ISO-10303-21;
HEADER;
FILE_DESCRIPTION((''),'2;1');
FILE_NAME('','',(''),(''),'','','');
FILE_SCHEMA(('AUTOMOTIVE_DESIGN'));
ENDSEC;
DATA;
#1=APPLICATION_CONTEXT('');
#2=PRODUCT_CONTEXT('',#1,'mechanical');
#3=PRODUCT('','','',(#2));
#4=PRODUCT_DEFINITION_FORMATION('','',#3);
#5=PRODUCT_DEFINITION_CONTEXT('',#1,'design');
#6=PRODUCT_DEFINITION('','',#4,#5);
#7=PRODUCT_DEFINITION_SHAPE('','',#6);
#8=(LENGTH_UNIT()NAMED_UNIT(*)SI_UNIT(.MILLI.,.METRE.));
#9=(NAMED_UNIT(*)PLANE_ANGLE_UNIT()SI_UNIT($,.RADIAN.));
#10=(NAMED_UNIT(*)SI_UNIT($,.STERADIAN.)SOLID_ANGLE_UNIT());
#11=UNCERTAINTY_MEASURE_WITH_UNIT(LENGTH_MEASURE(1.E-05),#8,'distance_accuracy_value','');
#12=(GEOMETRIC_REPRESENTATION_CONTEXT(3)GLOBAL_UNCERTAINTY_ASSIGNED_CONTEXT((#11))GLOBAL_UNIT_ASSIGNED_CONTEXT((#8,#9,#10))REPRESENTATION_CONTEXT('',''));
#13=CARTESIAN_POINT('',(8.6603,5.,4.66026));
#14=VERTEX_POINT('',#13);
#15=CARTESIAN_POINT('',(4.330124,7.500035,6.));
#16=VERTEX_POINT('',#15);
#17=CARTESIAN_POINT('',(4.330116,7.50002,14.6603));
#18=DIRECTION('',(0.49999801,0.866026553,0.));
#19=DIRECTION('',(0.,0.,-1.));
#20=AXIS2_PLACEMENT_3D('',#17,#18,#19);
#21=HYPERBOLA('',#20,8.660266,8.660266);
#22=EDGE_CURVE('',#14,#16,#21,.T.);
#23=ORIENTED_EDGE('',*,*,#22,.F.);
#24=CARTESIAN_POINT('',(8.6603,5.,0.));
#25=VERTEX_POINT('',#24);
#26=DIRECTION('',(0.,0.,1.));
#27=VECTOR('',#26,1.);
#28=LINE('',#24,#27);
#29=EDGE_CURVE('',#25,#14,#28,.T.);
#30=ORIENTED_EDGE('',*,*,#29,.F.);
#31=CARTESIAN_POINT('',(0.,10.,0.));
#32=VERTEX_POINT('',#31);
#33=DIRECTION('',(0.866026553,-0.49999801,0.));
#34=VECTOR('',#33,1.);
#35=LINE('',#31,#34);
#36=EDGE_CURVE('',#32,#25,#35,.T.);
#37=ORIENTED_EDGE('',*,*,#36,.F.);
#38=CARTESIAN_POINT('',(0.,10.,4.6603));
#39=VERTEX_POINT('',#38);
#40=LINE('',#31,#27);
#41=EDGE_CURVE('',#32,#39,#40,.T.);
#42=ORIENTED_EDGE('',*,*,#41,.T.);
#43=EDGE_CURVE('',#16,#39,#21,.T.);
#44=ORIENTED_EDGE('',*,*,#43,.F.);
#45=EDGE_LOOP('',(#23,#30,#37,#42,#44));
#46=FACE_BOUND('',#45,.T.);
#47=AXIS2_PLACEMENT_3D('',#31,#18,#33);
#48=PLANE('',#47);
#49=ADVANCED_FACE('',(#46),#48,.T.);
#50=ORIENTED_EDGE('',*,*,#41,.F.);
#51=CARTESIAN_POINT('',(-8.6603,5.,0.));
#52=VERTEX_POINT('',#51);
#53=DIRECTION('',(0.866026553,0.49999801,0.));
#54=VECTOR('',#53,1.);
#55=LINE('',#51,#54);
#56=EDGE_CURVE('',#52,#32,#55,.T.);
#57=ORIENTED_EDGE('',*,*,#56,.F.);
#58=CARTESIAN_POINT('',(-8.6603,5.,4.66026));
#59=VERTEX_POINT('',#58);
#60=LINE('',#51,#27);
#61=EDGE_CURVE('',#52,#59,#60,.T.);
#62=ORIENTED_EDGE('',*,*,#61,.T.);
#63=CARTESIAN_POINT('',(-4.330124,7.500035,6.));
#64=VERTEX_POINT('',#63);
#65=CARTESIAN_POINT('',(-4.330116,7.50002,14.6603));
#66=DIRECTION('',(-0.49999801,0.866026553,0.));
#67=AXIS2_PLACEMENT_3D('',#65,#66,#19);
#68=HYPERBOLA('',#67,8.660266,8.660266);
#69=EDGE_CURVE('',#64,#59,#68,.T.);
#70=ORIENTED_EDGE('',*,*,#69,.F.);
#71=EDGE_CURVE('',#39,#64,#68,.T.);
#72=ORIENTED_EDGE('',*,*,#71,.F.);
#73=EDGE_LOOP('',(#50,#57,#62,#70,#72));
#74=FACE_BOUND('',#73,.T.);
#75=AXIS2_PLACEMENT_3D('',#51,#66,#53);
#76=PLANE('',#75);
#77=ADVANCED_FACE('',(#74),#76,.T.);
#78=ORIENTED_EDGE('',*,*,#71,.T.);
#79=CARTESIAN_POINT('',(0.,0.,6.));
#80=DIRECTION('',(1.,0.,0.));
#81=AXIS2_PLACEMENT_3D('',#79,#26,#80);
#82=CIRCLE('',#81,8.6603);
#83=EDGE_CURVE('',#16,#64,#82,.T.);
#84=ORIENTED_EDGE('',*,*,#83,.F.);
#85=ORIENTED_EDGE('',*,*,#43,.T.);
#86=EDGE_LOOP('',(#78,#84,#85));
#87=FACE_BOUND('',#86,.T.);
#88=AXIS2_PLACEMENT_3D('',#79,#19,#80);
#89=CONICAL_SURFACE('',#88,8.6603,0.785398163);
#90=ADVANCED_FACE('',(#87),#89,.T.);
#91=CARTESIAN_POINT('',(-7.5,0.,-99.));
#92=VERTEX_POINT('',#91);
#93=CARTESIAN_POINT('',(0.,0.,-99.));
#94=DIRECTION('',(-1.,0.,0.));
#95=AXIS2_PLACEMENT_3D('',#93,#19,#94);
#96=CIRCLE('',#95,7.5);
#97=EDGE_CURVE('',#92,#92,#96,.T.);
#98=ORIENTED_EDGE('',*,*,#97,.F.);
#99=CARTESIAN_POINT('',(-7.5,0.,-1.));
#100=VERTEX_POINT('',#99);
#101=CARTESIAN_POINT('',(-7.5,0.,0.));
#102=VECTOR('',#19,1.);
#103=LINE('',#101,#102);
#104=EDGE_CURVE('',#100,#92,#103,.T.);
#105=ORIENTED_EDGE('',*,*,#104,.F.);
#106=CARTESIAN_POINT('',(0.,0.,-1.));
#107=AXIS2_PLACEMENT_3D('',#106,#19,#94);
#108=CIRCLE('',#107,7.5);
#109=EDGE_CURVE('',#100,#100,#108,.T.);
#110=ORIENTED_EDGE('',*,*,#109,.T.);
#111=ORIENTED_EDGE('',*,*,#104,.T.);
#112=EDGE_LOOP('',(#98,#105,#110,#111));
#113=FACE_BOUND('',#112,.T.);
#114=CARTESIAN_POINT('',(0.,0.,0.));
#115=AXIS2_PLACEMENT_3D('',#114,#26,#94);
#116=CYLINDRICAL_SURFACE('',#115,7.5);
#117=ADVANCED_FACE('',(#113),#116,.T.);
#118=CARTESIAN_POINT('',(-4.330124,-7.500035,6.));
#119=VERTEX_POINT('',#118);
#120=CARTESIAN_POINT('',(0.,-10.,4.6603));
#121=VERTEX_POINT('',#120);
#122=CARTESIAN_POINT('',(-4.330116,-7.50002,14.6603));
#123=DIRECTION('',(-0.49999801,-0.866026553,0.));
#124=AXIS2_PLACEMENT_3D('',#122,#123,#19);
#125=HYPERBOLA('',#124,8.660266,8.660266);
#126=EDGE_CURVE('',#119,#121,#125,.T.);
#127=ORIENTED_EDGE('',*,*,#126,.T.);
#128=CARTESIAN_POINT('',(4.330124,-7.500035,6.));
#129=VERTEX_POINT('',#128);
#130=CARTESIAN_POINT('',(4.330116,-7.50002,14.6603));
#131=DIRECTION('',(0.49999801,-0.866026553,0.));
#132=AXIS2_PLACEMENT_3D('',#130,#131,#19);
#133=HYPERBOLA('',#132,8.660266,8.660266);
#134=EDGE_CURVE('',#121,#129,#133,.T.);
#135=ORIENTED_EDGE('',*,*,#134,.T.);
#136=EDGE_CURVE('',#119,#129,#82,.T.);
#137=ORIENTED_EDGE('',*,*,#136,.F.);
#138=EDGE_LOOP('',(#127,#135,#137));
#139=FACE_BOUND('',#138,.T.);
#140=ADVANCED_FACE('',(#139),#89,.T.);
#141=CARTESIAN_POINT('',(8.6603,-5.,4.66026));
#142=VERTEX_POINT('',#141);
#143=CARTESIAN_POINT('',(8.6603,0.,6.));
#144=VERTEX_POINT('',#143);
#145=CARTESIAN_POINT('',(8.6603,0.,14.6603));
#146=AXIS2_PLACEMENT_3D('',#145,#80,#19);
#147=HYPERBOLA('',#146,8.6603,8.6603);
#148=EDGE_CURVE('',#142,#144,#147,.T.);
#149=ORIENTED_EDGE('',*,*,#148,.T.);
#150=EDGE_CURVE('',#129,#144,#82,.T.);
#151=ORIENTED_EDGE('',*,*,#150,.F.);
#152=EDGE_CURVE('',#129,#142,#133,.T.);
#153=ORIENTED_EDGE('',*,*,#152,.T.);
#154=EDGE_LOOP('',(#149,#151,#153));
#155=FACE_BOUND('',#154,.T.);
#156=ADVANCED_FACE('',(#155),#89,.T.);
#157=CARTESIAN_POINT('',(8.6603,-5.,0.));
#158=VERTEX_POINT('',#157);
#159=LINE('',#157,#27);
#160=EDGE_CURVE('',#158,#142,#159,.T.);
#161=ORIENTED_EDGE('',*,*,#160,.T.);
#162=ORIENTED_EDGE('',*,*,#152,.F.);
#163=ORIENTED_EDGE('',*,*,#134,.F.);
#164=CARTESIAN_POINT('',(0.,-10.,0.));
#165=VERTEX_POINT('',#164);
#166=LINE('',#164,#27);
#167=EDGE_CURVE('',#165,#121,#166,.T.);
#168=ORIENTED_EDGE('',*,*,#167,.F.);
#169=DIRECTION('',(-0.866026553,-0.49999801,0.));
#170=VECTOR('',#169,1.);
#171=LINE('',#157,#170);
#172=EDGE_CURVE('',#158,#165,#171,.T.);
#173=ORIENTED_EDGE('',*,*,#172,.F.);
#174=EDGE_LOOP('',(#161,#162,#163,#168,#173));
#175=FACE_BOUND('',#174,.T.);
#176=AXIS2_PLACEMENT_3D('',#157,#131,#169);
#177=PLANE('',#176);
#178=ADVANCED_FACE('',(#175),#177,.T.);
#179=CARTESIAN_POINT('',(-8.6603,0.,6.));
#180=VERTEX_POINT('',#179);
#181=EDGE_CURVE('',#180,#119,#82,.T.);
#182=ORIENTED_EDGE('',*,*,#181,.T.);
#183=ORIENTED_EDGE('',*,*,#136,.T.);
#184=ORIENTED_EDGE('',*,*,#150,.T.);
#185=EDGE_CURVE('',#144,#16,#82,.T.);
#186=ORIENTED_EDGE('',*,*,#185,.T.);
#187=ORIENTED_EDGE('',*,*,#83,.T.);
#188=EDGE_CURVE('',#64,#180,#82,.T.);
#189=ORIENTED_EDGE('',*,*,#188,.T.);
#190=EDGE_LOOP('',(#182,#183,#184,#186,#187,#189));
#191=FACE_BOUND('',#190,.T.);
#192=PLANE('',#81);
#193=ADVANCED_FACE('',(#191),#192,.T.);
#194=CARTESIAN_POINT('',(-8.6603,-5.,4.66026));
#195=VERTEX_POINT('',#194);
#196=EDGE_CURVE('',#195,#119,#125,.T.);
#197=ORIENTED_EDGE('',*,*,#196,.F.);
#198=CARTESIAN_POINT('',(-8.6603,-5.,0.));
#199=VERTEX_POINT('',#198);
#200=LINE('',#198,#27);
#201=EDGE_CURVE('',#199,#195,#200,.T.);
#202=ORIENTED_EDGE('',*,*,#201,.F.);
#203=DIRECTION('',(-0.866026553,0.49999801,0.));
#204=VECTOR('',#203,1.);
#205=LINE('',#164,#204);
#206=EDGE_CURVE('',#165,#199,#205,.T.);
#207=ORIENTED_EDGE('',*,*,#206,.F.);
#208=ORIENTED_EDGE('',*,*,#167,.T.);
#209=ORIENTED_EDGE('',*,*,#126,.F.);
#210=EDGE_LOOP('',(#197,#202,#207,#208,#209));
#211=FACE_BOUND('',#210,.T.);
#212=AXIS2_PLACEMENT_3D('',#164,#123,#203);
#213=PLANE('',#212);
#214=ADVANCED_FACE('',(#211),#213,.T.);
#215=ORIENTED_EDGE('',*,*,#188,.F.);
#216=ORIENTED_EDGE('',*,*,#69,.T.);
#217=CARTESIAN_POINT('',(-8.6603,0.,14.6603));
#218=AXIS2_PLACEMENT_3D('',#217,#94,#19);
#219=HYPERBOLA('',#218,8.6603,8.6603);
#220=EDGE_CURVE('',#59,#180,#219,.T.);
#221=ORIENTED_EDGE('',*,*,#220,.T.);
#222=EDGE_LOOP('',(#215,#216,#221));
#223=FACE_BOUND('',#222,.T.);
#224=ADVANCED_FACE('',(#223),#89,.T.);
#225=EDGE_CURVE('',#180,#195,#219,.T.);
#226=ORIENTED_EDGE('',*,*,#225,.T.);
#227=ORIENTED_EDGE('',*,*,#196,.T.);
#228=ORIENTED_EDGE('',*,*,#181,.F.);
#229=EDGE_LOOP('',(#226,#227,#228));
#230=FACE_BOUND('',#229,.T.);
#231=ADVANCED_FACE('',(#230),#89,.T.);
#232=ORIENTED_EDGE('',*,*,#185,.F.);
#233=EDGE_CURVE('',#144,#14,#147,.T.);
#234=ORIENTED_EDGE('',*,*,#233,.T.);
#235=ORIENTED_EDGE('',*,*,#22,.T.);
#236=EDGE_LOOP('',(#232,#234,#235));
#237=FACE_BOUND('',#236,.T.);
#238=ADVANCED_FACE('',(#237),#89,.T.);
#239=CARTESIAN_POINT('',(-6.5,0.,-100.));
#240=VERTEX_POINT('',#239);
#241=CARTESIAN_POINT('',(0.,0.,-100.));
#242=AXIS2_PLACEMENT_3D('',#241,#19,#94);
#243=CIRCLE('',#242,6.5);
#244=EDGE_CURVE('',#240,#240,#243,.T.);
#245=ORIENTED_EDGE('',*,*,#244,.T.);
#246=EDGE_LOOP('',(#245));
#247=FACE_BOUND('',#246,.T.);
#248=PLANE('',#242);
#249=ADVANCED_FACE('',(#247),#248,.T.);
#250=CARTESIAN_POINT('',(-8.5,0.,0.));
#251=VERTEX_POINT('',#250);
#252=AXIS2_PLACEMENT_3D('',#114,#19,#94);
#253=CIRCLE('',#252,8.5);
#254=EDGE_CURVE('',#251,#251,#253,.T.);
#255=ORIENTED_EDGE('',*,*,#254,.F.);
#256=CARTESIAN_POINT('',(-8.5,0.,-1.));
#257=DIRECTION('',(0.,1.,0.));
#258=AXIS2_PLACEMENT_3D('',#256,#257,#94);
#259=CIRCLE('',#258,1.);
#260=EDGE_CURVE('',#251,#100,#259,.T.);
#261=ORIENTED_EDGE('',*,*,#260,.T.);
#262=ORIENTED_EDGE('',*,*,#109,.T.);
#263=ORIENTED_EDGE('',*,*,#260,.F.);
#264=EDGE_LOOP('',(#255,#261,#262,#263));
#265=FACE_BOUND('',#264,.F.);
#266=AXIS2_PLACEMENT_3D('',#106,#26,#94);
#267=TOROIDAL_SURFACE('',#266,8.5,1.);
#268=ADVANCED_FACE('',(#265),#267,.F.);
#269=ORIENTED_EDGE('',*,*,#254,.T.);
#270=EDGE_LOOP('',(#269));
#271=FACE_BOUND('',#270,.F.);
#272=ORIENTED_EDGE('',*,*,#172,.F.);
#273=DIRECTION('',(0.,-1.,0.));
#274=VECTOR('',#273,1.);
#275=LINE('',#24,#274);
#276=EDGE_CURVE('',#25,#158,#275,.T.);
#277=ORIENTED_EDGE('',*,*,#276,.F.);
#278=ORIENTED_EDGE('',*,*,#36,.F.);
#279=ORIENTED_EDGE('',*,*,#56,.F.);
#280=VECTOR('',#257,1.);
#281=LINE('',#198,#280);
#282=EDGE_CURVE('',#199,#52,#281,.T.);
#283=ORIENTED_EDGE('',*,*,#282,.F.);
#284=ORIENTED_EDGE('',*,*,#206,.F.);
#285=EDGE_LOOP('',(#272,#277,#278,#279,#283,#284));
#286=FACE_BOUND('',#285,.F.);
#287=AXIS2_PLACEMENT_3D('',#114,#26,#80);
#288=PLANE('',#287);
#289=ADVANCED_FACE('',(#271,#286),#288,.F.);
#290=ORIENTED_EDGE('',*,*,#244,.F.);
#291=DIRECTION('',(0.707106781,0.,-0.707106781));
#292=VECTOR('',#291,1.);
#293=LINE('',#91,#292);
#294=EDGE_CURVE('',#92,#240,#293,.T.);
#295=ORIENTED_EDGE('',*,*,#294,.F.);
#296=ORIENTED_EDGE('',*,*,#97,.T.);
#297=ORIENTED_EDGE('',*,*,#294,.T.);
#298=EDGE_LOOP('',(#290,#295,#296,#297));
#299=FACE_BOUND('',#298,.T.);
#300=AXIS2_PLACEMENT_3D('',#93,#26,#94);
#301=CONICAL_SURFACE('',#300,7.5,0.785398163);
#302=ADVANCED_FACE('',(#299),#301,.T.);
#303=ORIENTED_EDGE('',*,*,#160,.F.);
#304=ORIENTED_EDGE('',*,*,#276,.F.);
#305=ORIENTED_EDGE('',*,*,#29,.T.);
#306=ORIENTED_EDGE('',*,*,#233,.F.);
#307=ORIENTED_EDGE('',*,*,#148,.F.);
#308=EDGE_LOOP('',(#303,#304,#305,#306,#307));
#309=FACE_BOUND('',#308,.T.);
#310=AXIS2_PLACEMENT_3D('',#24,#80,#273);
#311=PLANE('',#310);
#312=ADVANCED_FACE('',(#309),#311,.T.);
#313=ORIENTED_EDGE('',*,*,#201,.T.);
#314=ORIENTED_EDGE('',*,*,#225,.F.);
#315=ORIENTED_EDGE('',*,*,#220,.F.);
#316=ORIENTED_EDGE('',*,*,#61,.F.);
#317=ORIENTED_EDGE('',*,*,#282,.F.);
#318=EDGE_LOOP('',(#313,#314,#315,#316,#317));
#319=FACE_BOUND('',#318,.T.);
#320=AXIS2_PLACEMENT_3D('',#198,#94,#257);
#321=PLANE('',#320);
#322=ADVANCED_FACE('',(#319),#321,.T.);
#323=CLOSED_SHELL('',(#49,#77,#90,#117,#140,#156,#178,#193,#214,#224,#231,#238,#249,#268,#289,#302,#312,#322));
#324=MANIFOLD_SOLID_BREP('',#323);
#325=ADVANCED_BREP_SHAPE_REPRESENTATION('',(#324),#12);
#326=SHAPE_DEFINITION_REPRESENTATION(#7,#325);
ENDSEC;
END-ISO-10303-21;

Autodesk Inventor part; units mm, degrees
ref_plane "YZ Plane" through (0, 0, 0) normal (1, 0, 0) x (0, 1, 0)
ref_plane "XZ Plane" through (0, 0, 0) normal (0, 1, 0) x (-1, 0, 0)
ref_plane "XY Plane" through (0, 0, 0) normal (0, 0, 1) x (1, 0, 0)
sketch "Sketch1" plane through (0, 0, 0) normal (0, 0, 1) x (1, 0, 0)
  line L0 (8.6603, -5) -> (0, -10)
  line L1 (0, -10) -> (-8.6603, -5)
  line L2 (-8.6603, -5) -> (-8.6603, 5)
  line L3 (-8.6603, 5) -> (0, 10)
  line L4 (0, 10) -> (8.6603, 5)
  line L5 (8.6603, 5) -> (8.6603, -5)
  point P0 (0, 0)
  point P1 (0, 0)
  dimension "d0" = 10
extrude "Extrusion1" add sketch "Sketch1" along normal blind 6
sketch "Sketch2" plane through (0, 0, 6) normal (0, 0, 1) x (1, 0, 0)
  circle A0 centre (0, 0) radius 8.6603
  line L0 (0, -10) -> (8.6603, -5) projected
extrude "Extrusion2" cut sketch "Sketch2" against normal blind 6 draft 45 keep common part
sketch "Sketch3" plane through (0, 0, 0) normal (0, 0, -1) x (-1, 0, 0)
  circle A0 centre (0, 0) radius 7.5
  dimension "d5" = 15
extrude "Extrusion3" add sketch "Sketch3" along normal blind 100
fillet "Fillet1" radius 1 1 edges at (7.5, 0, 0)
chamfer "Chamfer1" distance 1 angle 45 1 edges at (7.5, 0, -100)
sketch "Sketch4" plane through (0, 0, 0) normal (0, 1, 0) x (-1, 0, 0)
  point P0 (0, 0)
sketch "Sketch5" plane through (0, 0, 0) normal (0, 1, 0) x (-1, 0, 0)
  point P0 (0, 0)
thread "Thread1" size "M15x1.5" class "6g" standard "ANSI Metric M Profile" length 77 offset 11
properties part number "Main Bolt"
